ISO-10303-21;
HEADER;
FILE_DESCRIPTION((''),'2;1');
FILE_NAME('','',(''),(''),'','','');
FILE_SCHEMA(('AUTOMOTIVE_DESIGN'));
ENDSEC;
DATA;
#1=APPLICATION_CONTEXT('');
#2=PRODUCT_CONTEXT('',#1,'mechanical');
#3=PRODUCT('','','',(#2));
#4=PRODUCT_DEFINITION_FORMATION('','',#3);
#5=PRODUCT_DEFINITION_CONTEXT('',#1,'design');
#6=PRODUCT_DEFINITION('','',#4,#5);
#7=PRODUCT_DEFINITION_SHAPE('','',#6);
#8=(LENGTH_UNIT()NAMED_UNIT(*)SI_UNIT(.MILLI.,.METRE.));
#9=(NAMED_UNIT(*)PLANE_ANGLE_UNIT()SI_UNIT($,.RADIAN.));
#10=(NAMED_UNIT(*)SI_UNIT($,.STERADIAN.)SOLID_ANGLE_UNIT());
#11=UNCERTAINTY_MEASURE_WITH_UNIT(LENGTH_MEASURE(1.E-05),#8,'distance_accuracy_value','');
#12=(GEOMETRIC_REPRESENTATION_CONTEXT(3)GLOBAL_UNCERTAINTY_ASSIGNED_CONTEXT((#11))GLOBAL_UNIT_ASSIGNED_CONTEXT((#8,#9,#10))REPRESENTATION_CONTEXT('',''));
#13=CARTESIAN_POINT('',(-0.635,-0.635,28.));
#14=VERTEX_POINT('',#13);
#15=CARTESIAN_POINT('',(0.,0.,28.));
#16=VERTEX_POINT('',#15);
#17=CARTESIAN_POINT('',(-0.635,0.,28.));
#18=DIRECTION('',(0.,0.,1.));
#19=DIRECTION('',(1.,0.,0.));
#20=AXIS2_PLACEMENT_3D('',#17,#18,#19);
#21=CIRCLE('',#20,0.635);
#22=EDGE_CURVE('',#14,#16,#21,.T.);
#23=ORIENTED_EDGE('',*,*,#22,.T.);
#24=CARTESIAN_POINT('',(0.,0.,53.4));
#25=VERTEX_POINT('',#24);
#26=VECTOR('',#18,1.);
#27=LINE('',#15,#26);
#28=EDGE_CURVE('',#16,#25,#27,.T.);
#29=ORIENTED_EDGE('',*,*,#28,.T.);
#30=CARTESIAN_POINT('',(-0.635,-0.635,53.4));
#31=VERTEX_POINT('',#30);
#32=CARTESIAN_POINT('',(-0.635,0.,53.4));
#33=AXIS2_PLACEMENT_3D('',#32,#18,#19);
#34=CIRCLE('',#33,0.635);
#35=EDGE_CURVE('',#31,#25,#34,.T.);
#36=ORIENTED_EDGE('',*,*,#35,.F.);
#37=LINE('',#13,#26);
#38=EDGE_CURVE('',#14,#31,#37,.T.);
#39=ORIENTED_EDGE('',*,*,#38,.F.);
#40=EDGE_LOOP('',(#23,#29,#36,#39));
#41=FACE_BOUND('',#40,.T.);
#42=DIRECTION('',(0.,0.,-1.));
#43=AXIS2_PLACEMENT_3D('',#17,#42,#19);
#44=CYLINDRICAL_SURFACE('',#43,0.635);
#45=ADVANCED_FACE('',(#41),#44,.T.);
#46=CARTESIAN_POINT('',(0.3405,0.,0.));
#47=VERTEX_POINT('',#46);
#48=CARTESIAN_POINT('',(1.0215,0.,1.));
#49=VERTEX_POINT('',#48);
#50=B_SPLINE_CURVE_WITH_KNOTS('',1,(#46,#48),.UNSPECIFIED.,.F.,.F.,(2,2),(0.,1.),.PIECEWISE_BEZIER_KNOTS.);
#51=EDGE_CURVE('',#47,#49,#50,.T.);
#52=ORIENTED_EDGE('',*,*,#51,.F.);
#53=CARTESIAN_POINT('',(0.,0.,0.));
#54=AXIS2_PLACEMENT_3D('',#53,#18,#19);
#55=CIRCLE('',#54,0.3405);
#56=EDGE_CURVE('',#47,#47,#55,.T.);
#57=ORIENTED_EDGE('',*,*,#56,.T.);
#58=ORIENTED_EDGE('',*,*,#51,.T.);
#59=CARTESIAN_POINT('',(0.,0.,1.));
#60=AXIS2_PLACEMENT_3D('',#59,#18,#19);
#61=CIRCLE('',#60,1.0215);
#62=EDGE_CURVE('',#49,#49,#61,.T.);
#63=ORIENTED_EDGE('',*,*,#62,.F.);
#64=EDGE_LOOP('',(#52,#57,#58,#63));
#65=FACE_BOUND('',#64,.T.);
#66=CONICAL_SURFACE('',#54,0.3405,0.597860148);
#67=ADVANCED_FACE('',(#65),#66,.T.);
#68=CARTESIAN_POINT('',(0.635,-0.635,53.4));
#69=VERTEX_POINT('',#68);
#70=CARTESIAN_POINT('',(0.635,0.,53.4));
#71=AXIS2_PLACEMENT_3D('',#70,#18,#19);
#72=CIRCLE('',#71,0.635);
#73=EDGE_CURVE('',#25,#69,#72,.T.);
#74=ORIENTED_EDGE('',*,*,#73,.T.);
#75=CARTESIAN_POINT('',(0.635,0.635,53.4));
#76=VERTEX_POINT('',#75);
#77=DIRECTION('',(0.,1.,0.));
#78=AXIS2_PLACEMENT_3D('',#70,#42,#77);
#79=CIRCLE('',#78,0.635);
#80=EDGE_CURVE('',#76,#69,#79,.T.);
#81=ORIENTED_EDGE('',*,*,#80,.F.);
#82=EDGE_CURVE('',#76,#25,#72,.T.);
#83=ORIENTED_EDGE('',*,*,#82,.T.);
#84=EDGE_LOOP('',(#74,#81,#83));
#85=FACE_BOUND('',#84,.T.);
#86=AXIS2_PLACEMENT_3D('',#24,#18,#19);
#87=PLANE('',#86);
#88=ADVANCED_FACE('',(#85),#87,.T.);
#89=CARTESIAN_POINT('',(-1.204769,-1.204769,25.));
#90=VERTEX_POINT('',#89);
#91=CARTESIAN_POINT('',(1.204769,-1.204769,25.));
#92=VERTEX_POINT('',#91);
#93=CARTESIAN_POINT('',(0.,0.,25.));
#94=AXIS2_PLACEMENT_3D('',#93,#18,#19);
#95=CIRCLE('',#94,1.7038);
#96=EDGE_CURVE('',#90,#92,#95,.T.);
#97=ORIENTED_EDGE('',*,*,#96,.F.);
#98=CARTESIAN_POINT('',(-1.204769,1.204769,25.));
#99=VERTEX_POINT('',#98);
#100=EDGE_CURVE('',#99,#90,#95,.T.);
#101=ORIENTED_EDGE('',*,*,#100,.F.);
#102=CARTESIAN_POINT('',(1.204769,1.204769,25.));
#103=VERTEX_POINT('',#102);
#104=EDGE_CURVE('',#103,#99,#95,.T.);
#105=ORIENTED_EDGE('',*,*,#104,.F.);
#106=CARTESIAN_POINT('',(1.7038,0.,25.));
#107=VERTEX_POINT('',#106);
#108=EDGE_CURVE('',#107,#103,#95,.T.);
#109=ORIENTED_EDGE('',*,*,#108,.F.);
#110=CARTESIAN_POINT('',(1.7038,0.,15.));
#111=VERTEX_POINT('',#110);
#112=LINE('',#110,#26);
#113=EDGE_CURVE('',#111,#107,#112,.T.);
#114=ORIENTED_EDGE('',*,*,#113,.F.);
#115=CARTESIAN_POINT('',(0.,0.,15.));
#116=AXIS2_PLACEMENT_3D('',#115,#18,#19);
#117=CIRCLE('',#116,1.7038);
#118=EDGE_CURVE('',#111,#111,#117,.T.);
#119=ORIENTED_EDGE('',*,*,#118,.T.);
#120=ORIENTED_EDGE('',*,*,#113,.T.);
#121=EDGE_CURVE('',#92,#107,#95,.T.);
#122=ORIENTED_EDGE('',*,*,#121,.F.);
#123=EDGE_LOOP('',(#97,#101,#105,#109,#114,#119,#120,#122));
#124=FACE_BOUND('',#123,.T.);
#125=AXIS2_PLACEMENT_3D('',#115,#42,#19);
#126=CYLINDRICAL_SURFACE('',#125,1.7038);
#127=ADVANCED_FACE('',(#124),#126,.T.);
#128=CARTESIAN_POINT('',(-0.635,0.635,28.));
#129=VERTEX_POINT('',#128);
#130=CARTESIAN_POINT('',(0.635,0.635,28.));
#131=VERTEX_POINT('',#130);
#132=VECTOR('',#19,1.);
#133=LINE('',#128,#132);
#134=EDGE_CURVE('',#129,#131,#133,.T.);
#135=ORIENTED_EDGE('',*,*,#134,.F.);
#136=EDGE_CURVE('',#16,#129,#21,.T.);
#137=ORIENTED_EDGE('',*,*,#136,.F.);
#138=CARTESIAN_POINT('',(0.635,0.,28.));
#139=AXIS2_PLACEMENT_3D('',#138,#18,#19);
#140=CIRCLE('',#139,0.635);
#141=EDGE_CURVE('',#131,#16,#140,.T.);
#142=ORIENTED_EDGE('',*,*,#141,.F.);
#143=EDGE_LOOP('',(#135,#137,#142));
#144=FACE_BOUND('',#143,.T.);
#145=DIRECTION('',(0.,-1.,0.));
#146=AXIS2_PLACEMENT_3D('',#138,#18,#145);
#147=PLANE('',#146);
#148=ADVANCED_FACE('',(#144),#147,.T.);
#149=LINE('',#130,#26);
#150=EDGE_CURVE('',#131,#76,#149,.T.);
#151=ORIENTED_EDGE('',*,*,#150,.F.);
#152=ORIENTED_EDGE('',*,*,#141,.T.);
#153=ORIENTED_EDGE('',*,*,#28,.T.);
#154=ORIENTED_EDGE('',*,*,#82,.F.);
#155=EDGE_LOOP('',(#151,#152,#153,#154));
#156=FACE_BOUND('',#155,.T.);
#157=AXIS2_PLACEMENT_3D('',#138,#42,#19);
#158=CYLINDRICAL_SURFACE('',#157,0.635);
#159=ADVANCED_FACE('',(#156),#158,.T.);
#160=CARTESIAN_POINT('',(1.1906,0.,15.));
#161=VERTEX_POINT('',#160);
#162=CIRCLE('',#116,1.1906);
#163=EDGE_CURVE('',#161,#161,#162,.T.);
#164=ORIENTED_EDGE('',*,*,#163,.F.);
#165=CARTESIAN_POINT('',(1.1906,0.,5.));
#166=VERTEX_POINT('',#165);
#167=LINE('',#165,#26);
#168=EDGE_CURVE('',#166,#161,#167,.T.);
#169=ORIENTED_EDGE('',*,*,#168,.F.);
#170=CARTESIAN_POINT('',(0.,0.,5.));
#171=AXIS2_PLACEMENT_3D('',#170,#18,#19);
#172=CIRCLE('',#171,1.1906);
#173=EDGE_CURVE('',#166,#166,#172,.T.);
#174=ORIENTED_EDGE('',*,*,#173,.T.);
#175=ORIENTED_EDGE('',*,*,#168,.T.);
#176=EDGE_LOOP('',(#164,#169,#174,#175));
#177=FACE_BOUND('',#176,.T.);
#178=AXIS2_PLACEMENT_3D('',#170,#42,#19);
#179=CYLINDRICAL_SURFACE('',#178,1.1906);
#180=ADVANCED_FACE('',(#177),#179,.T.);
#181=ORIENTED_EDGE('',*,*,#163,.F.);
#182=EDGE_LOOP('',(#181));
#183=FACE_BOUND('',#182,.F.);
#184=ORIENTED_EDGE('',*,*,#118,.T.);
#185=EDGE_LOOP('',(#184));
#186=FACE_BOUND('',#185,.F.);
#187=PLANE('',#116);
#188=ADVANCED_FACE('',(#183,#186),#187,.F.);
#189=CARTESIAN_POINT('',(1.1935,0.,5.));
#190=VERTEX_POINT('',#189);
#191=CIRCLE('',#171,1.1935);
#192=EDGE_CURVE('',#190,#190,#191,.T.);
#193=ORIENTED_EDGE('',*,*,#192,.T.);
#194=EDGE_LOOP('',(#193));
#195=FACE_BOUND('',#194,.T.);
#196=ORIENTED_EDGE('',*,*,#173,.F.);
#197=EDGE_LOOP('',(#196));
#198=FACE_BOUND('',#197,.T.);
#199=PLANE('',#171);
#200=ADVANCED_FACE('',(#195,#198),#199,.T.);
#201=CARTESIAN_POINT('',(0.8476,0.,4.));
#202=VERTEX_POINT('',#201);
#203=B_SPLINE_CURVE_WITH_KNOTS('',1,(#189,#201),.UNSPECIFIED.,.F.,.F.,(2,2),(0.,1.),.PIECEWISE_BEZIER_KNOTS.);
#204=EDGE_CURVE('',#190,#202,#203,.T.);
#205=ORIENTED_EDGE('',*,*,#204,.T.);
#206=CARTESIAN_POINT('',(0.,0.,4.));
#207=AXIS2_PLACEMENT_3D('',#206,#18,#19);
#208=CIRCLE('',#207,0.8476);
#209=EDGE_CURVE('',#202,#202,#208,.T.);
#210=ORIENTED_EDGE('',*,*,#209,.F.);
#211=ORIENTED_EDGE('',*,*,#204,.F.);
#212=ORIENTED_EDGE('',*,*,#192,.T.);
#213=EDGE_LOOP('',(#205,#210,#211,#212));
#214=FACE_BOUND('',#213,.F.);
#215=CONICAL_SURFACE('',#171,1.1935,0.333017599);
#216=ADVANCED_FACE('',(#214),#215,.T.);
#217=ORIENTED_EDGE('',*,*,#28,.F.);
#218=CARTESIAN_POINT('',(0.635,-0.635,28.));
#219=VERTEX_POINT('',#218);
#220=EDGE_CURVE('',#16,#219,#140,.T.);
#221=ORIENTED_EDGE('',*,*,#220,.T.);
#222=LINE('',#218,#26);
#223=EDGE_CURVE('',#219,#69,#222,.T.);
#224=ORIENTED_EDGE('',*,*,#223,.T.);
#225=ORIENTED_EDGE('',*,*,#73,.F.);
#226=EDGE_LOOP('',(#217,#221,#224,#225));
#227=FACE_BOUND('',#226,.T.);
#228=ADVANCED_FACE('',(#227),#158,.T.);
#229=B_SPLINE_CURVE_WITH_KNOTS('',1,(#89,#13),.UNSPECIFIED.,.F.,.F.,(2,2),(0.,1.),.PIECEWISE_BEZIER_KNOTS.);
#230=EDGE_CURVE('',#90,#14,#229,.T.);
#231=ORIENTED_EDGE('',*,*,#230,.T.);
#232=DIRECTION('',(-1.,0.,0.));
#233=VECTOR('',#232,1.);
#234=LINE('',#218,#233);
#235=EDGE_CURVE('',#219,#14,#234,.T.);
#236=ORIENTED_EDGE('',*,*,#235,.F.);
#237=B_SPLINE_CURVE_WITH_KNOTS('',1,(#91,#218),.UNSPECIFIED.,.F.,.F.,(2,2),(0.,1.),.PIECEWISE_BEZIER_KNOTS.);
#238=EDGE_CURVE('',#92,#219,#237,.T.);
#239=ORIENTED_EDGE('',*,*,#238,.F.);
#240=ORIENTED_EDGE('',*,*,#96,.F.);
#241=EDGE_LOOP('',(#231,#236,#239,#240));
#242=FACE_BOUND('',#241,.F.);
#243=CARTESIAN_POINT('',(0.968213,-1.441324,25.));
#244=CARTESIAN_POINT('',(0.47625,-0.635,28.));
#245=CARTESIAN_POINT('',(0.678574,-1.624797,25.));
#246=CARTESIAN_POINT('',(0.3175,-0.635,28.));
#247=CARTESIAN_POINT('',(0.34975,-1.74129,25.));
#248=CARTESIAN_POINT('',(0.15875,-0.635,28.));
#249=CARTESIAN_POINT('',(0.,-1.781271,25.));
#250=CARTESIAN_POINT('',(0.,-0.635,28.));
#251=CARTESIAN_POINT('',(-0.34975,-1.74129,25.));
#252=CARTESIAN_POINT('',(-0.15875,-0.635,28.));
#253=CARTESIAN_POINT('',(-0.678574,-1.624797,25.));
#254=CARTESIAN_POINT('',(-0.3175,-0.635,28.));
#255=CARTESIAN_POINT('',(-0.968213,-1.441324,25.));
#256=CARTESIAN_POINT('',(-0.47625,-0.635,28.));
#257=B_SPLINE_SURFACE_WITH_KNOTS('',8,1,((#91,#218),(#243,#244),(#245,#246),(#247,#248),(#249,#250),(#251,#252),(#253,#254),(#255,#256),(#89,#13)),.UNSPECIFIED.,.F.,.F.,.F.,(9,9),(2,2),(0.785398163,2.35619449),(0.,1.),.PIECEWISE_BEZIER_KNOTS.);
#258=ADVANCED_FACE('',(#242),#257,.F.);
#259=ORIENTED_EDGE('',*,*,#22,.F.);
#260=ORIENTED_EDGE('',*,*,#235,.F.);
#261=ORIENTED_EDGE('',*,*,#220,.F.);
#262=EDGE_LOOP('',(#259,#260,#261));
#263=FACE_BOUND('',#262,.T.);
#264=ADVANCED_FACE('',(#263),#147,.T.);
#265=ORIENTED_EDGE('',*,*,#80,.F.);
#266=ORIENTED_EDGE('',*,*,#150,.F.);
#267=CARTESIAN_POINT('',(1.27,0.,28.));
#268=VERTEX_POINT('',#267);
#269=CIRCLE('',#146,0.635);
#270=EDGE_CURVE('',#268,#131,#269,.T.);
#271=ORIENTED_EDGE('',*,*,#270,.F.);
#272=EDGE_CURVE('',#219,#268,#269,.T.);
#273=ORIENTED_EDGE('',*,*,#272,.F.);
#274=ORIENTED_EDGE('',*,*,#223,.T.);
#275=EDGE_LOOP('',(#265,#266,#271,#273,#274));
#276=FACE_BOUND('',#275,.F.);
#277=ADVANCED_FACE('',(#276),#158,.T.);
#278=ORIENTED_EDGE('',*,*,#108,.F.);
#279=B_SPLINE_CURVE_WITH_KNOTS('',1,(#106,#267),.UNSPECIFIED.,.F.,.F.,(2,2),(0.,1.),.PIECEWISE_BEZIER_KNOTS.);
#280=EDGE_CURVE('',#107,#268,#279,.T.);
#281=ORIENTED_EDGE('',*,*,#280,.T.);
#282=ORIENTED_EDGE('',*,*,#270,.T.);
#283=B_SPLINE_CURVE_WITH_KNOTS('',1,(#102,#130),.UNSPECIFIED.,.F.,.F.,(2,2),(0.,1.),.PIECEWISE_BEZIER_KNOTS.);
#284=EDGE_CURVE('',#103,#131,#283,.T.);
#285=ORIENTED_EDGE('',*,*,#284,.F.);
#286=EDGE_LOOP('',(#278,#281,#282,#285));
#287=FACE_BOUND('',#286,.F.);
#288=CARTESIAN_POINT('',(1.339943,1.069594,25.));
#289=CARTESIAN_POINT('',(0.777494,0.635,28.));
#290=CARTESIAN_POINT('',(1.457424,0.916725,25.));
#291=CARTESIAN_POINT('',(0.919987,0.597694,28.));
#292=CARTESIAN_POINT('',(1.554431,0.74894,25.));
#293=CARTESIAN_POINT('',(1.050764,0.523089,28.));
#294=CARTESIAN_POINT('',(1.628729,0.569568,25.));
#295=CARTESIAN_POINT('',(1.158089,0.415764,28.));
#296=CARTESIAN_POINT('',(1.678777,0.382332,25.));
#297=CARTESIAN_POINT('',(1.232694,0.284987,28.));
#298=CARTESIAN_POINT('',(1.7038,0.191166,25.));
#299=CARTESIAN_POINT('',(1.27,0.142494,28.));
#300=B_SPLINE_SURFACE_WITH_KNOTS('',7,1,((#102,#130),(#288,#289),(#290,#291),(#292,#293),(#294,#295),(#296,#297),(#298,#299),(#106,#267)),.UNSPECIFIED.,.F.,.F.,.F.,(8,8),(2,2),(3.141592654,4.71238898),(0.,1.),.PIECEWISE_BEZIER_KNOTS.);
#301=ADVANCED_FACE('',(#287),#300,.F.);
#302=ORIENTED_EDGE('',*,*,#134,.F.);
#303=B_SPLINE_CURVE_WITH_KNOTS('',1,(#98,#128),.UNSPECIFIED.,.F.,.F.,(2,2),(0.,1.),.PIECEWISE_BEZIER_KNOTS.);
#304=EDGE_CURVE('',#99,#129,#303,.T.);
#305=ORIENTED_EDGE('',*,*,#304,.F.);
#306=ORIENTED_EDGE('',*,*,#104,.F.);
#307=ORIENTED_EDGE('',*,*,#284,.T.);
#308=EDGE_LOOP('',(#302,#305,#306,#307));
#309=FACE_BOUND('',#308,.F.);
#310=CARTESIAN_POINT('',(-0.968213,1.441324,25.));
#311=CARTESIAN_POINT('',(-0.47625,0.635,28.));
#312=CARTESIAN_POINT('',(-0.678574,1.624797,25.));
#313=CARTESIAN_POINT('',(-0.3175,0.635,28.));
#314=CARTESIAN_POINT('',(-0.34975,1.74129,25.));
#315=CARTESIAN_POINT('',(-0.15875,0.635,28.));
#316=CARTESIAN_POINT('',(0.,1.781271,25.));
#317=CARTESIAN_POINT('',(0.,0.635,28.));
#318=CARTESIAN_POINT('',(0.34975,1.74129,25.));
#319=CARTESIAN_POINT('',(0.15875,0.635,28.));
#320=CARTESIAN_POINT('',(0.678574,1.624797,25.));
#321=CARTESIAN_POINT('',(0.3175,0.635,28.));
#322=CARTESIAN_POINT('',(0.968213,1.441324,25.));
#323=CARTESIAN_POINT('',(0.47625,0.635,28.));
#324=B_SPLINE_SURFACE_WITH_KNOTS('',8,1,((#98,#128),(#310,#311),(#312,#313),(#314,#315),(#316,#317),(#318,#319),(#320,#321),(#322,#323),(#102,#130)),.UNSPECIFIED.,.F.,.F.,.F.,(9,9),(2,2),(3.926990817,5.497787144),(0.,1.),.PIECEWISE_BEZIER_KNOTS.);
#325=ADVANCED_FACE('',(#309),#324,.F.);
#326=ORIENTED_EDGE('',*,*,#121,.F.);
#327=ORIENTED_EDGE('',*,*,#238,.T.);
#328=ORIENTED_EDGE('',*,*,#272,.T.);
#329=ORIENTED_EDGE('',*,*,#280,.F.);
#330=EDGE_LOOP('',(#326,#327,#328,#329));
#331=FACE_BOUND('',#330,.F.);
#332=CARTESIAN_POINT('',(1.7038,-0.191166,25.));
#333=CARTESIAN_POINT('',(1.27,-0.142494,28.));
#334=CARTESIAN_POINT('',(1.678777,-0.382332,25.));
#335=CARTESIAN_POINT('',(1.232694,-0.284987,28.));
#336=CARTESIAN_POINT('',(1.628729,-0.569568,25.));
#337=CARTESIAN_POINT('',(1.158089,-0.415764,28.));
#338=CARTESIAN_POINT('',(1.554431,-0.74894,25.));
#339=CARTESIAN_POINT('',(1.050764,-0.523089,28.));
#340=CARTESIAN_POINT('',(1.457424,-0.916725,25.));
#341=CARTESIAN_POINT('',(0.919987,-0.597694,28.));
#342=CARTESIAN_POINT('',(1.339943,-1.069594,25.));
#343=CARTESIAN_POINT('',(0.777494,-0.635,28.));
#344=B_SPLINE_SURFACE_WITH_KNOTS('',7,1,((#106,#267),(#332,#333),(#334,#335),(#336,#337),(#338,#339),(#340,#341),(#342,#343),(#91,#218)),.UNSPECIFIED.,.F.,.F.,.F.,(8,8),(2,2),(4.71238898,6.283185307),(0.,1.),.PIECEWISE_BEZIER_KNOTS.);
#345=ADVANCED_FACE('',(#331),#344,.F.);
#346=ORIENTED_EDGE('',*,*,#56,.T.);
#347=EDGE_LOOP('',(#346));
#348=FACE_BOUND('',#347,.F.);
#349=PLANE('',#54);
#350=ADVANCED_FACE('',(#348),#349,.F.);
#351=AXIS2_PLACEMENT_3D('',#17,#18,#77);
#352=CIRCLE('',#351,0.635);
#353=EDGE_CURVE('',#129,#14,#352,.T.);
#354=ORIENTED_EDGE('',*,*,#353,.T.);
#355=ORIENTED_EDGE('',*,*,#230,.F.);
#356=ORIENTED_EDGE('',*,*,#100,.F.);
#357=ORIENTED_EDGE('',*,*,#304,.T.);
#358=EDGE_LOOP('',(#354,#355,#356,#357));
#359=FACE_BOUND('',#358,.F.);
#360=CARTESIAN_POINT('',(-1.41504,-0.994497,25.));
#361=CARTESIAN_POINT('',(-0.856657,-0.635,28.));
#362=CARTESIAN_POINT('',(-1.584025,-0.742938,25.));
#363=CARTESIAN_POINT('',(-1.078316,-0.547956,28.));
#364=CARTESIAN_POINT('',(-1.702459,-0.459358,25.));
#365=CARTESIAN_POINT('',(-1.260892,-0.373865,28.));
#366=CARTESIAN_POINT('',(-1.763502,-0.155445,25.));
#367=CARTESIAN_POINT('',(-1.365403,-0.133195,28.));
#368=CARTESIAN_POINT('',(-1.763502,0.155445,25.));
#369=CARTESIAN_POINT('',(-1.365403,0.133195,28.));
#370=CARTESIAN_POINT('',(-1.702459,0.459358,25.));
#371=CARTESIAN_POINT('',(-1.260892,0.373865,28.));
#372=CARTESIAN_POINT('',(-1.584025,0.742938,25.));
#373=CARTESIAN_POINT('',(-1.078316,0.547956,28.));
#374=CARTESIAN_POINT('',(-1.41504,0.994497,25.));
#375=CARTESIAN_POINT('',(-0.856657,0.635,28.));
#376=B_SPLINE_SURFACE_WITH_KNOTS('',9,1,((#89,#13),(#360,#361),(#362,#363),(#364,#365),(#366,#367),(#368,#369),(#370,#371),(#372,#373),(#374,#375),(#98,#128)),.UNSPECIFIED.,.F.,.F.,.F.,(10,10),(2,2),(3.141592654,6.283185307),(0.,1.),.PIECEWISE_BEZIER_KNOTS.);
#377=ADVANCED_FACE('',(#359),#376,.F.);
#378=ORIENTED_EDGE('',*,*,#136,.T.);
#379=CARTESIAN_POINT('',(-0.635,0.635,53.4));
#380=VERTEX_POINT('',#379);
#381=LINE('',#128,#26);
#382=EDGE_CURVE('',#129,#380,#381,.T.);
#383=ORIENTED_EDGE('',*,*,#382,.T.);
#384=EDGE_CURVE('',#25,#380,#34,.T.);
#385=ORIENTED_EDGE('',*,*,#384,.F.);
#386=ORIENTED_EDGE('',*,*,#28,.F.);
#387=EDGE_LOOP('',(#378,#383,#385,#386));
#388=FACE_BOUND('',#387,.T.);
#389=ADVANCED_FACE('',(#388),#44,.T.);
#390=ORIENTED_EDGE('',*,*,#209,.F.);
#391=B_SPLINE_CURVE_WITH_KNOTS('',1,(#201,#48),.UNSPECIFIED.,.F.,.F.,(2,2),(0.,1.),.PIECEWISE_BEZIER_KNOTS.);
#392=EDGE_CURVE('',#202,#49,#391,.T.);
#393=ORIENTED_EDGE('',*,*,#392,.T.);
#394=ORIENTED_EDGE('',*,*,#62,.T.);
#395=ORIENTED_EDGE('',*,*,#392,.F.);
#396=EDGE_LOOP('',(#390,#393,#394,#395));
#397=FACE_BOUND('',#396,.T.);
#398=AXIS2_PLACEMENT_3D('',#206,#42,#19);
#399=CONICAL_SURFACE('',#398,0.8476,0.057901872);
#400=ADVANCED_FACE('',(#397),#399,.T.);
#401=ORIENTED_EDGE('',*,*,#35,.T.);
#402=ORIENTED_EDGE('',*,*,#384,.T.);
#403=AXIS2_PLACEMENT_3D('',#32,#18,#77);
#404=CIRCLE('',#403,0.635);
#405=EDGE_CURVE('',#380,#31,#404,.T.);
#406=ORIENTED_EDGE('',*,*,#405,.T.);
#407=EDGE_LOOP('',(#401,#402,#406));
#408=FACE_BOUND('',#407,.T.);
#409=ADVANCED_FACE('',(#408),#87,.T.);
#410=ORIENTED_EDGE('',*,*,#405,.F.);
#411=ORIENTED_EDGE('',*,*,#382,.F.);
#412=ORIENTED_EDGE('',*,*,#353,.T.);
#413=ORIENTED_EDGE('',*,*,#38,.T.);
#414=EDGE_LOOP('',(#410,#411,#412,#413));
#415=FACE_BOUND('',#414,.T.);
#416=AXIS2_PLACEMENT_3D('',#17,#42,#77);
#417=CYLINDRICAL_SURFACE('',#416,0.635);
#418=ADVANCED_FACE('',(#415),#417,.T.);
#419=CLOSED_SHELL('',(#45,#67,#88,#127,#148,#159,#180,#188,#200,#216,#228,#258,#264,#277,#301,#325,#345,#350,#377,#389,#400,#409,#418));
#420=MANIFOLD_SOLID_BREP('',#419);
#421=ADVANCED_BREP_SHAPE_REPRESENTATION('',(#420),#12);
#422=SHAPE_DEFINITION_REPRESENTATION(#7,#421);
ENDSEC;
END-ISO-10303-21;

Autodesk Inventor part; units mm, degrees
ref_plane "YZ Plane" through (0, 0, 0) normal (1, 0, 0) x (0, 1, 0)
sketch "Sketch1" plane through (0, 0, 0) normal (0, 0, 1) x (1, 0, 0)
  circle A0 centre (0, 0) radius 0.3405
  dimension "d0" = 0.681
ref_plane "Work Plane1" through (0, 0, 1) normal (0, 0, 1) x (1, 0, 0)
sketch "Sketch2" plane through (0, 0, 1) normal (0, 0, 1) x (1, 0, 0)
  circle A0 centre (0, 0) radius 1.0215
  dimension "d2" = 2.043
ref_plane "Work Plane2" through (0, 0, 4) normal (0, 0, 1) x (1, 0, 0)
sketch "Sketch3" plane through (0, 0, 4) normal (0, 0, 1) x (1, 0, 0)
  circle A0 centre (0, 0) radius 0.8476
  dimension "d4" = 1.6951
ref_plane "Work Plane3" through (0, 0, 5) normal (0, 0, 1) x (1, 0, 0)
sketch "Sketch4" plane through (0, 0, 5) normal (0, 0, 1) x (1, 0, 0)
  circle A0 centre (0, 0) radius 1.1935
  dimension "d6" = 2.387
loft "Loft1" add profiles "Sketch4", "Sketch3"
loft "Loft2" add profiles "Sketch2" section 1 edges at (-0.8476, 0, 4)
loft "Loft3" add profiles "Sketch1" section 2 edges at (-1.0215, 0, 1)
sketch "Sketch5" plane through (0, 0, 5) normal (0, 0, 1) x (1, 0, 0)
  circle A0 centre (0, 0) radius 1.1906
  dimension "d35" = 2.3813
extrude "Extrusion1" add sketch "Sketch5" along normal blind 10
sketch "Sketch6" plane through (0, 0, 15) normal (0, 0, 1) x (1, 0, 0)
  circle A0 centre (0, 0) radius 1.7038
  dimension "d21" = 3.4076
extrude "Extrusion2" add sketch "Sketch6" along normal blind 10
ref_plane "Work Plane4" through (0, 0, 28) normal (0, 0, 1) x (1, 0, 0)
sketch "Sketch7" plane through (0, 0, 28) normal (0, 0, 1) x (1, 0, 0)
  arc A0 (-0.635, 0.635) -> (-0.635, -0.635) centre (-0.635, 0) ccw
  arc A1 (0.635, -0.635) -> (0.635, 0.635) centre (0.635, 0) ccw
  line L0 (-0.635, 0.635) -> (0.635, 0.635)
  line L1 (0.635, -0.635) -> (-0.635, -0.635)
loft "Loft4" add profiles "Sketch7" section 1 edges at (-1.7038, 0, 25)
sketch "Sketch8" plane through (0, 0, 28) normal (0, 0, 1) x (1, 0, 0)
  arc A0 (-0.635, 0.635) -> (-0.635, -0.635) centre (-0.635, 0) ccw projected
  circle A1 centre (-0.635, 0) radius 0.635
  arc A2 (0.635, -0.635) -> (0.635, 0.635) centre (0.635, 0) ccw projected
  circle A3 centre (0.635, 0) radius 0.635
  point P0 (0, 0)
extrude "Extrusion3" add sketch "Sketch8" along normal blind 25.4
properties part number "Male End Audio Jack"
